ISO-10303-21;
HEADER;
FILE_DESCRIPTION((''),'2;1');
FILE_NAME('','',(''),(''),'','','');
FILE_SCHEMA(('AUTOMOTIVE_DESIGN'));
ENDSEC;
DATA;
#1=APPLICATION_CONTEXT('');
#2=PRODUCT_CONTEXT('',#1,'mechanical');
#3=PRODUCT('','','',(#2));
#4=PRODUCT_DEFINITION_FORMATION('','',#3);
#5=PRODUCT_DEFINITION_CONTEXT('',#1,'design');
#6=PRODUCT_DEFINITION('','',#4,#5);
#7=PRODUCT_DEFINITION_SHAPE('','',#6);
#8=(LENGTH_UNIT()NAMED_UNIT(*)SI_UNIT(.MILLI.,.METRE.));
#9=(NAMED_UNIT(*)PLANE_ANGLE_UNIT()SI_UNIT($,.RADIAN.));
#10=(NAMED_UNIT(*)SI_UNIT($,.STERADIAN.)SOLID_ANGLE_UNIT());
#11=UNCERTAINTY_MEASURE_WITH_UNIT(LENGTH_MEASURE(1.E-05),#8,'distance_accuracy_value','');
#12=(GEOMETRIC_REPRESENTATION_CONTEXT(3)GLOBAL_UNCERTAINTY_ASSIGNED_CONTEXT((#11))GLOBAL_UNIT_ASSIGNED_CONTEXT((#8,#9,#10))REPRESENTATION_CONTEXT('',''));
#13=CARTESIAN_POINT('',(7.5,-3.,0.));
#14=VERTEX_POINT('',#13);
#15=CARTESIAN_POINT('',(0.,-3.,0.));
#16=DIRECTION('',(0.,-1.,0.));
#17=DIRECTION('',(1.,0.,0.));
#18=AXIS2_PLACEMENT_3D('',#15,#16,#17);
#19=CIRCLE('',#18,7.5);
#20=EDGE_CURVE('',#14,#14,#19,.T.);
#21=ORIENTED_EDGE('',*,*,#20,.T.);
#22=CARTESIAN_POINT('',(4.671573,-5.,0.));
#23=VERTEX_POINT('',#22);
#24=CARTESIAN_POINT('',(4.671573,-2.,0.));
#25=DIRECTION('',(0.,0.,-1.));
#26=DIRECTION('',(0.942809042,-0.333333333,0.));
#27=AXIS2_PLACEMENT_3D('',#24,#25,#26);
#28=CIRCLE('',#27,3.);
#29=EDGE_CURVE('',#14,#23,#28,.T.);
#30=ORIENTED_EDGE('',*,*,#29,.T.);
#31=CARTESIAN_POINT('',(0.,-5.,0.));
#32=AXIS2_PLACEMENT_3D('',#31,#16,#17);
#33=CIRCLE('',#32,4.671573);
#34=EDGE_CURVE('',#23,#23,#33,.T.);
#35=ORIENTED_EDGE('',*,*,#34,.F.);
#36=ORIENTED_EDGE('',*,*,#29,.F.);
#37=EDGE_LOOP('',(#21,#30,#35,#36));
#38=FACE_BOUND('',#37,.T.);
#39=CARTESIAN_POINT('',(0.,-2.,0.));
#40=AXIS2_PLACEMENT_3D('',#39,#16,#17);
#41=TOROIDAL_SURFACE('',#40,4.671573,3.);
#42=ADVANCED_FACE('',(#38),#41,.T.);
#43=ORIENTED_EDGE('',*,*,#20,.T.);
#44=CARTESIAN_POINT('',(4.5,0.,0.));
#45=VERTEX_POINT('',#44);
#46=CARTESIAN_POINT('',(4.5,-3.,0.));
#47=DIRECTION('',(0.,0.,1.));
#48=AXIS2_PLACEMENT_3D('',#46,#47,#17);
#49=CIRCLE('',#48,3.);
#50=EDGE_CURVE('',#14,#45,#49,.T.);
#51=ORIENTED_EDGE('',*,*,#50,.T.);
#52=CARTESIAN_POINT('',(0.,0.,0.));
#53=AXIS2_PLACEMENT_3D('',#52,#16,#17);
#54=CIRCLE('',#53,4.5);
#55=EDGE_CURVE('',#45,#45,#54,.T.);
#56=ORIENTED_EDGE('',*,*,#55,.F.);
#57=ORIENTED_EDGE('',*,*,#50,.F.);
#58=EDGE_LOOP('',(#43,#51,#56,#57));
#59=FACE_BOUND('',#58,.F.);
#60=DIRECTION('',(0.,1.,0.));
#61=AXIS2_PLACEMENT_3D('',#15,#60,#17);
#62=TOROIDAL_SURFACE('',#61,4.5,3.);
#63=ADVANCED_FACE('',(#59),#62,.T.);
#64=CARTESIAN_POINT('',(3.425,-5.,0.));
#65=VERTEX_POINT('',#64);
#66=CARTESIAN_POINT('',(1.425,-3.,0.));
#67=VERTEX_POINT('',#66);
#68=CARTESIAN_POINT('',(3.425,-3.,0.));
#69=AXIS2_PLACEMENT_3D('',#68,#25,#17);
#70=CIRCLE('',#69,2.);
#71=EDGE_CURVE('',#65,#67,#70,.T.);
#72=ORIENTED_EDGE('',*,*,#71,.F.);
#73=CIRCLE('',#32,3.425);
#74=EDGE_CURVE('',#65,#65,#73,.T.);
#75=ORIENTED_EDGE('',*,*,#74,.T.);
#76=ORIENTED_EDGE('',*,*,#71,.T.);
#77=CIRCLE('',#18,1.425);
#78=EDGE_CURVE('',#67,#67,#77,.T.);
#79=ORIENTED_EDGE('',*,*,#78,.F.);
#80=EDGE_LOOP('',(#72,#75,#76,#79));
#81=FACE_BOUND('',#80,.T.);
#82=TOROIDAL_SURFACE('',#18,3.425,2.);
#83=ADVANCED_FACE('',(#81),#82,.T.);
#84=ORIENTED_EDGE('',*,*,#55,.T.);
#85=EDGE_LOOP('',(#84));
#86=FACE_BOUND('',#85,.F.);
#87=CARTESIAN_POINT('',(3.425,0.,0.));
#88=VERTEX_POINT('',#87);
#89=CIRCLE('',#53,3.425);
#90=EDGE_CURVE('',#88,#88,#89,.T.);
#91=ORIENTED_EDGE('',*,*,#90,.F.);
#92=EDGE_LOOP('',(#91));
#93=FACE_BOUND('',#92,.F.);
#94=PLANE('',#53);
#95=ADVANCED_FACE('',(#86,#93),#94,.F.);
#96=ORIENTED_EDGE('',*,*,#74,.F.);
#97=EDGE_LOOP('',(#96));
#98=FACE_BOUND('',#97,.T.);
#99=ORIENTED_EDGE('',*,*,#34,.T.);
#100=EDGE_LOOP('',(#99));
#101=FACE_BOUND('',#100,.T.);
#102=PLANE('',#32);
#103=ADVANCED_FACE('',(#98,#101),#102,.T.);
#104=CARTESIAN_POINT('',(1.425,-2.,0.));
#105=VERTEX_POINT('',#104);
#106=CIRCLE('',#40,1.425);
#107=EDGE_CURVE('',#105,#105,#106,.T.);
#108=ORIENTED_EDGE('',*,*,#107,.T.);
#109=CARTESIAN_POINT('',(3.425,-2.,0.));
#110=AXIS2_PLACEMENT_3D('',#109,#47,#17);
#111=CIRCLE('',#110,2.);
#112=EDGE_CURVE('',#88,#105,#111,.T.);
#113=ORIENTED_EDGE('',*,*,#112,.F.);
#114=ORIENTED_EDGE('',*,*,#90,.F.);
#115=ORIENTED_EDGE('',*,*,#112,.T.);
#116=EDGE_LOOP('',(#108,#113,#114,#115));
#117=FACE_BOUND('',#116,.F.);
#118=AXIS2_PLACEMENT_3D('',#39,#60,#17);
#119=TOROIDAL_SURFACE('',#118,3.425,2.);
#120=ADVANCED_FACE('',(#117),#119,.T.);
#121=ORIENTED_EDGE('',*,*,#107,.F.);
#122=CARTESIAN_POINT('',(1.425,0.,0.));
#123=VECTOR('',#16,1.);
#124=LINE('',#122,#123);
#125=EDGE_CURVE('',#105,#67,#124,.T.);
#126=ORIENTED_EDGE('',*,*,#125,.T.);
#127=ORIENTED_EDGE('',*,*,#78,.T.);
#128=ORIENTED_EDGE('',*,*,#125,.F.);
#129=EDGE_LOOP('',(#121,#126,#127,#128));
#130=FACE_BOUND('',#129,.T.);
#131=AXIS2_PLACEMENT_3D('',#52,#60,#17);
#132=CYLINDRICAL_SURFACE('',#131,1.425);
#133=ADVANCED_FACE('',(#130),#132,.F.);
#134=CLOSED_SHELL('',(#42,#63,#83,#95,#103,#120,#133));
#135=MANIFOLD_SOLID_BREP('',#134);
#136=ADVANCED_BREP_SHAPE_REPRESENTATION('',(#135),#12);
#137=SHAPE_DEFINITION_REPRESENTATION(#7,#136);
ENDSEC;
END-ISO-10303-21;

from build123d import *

# Parameters (mm, degrees)
F0_R     = 7.5
F0_R_2   = 1.425
F1_DEPTH = 5
F2_R     = 3
F4_R     = 2


# Not quite as in the source:
# - a fillet or chamfer that OpenCascade refuses, or shapes differently, is made with other operations: its cross-section is extruded or revolved along the edge and cut away or added


with BuildPart() as f1:
    # F0 (on Front) → F1 (new body)
    with BuildSketch(Plane.XZ):
        Circle(F0_R)
        Circle(F0_R_2, mode=Mode.SUBTRACT)
    extrude(amount=F1_DEPTH)

    # F2
    f2_edges = [f1.edges().sort_by_distance(p)[0] for p in [
        (-7.5, 0, 0),
    ]]
    fillet(f2_edges, radius=F2_R)

    # F3: fillet of radius 3 on 1 edges, made by hand

    # F3_s1 → F3_t2 (revolve, cut)
    with BuildSketch(Plane.XY):
        with BuildLine():
            ThreePointArc((7.5, -3), (6.4036236828, -4.4494897428), (4.6715728753, -5))
            Line((4.6715728753, -5), (7.5, -5))
            Line((7.5, -5), (7.5, -3))
        make_face()
    revolve(axis=Axis((0, -5, 0), (0, -1, 0)), mode=Mode.SUBTRACT)

    # F4
    f4_edges = [f1.edges().sort_by_distance(p)[0] for p in [
        (1.425, -2.5, 0),
        (-1.425, 0, 0),
        (-1.425, -5, 0),
    ]]
    fillet(f4_edges, radius=F4_R)


solid = f1.part
